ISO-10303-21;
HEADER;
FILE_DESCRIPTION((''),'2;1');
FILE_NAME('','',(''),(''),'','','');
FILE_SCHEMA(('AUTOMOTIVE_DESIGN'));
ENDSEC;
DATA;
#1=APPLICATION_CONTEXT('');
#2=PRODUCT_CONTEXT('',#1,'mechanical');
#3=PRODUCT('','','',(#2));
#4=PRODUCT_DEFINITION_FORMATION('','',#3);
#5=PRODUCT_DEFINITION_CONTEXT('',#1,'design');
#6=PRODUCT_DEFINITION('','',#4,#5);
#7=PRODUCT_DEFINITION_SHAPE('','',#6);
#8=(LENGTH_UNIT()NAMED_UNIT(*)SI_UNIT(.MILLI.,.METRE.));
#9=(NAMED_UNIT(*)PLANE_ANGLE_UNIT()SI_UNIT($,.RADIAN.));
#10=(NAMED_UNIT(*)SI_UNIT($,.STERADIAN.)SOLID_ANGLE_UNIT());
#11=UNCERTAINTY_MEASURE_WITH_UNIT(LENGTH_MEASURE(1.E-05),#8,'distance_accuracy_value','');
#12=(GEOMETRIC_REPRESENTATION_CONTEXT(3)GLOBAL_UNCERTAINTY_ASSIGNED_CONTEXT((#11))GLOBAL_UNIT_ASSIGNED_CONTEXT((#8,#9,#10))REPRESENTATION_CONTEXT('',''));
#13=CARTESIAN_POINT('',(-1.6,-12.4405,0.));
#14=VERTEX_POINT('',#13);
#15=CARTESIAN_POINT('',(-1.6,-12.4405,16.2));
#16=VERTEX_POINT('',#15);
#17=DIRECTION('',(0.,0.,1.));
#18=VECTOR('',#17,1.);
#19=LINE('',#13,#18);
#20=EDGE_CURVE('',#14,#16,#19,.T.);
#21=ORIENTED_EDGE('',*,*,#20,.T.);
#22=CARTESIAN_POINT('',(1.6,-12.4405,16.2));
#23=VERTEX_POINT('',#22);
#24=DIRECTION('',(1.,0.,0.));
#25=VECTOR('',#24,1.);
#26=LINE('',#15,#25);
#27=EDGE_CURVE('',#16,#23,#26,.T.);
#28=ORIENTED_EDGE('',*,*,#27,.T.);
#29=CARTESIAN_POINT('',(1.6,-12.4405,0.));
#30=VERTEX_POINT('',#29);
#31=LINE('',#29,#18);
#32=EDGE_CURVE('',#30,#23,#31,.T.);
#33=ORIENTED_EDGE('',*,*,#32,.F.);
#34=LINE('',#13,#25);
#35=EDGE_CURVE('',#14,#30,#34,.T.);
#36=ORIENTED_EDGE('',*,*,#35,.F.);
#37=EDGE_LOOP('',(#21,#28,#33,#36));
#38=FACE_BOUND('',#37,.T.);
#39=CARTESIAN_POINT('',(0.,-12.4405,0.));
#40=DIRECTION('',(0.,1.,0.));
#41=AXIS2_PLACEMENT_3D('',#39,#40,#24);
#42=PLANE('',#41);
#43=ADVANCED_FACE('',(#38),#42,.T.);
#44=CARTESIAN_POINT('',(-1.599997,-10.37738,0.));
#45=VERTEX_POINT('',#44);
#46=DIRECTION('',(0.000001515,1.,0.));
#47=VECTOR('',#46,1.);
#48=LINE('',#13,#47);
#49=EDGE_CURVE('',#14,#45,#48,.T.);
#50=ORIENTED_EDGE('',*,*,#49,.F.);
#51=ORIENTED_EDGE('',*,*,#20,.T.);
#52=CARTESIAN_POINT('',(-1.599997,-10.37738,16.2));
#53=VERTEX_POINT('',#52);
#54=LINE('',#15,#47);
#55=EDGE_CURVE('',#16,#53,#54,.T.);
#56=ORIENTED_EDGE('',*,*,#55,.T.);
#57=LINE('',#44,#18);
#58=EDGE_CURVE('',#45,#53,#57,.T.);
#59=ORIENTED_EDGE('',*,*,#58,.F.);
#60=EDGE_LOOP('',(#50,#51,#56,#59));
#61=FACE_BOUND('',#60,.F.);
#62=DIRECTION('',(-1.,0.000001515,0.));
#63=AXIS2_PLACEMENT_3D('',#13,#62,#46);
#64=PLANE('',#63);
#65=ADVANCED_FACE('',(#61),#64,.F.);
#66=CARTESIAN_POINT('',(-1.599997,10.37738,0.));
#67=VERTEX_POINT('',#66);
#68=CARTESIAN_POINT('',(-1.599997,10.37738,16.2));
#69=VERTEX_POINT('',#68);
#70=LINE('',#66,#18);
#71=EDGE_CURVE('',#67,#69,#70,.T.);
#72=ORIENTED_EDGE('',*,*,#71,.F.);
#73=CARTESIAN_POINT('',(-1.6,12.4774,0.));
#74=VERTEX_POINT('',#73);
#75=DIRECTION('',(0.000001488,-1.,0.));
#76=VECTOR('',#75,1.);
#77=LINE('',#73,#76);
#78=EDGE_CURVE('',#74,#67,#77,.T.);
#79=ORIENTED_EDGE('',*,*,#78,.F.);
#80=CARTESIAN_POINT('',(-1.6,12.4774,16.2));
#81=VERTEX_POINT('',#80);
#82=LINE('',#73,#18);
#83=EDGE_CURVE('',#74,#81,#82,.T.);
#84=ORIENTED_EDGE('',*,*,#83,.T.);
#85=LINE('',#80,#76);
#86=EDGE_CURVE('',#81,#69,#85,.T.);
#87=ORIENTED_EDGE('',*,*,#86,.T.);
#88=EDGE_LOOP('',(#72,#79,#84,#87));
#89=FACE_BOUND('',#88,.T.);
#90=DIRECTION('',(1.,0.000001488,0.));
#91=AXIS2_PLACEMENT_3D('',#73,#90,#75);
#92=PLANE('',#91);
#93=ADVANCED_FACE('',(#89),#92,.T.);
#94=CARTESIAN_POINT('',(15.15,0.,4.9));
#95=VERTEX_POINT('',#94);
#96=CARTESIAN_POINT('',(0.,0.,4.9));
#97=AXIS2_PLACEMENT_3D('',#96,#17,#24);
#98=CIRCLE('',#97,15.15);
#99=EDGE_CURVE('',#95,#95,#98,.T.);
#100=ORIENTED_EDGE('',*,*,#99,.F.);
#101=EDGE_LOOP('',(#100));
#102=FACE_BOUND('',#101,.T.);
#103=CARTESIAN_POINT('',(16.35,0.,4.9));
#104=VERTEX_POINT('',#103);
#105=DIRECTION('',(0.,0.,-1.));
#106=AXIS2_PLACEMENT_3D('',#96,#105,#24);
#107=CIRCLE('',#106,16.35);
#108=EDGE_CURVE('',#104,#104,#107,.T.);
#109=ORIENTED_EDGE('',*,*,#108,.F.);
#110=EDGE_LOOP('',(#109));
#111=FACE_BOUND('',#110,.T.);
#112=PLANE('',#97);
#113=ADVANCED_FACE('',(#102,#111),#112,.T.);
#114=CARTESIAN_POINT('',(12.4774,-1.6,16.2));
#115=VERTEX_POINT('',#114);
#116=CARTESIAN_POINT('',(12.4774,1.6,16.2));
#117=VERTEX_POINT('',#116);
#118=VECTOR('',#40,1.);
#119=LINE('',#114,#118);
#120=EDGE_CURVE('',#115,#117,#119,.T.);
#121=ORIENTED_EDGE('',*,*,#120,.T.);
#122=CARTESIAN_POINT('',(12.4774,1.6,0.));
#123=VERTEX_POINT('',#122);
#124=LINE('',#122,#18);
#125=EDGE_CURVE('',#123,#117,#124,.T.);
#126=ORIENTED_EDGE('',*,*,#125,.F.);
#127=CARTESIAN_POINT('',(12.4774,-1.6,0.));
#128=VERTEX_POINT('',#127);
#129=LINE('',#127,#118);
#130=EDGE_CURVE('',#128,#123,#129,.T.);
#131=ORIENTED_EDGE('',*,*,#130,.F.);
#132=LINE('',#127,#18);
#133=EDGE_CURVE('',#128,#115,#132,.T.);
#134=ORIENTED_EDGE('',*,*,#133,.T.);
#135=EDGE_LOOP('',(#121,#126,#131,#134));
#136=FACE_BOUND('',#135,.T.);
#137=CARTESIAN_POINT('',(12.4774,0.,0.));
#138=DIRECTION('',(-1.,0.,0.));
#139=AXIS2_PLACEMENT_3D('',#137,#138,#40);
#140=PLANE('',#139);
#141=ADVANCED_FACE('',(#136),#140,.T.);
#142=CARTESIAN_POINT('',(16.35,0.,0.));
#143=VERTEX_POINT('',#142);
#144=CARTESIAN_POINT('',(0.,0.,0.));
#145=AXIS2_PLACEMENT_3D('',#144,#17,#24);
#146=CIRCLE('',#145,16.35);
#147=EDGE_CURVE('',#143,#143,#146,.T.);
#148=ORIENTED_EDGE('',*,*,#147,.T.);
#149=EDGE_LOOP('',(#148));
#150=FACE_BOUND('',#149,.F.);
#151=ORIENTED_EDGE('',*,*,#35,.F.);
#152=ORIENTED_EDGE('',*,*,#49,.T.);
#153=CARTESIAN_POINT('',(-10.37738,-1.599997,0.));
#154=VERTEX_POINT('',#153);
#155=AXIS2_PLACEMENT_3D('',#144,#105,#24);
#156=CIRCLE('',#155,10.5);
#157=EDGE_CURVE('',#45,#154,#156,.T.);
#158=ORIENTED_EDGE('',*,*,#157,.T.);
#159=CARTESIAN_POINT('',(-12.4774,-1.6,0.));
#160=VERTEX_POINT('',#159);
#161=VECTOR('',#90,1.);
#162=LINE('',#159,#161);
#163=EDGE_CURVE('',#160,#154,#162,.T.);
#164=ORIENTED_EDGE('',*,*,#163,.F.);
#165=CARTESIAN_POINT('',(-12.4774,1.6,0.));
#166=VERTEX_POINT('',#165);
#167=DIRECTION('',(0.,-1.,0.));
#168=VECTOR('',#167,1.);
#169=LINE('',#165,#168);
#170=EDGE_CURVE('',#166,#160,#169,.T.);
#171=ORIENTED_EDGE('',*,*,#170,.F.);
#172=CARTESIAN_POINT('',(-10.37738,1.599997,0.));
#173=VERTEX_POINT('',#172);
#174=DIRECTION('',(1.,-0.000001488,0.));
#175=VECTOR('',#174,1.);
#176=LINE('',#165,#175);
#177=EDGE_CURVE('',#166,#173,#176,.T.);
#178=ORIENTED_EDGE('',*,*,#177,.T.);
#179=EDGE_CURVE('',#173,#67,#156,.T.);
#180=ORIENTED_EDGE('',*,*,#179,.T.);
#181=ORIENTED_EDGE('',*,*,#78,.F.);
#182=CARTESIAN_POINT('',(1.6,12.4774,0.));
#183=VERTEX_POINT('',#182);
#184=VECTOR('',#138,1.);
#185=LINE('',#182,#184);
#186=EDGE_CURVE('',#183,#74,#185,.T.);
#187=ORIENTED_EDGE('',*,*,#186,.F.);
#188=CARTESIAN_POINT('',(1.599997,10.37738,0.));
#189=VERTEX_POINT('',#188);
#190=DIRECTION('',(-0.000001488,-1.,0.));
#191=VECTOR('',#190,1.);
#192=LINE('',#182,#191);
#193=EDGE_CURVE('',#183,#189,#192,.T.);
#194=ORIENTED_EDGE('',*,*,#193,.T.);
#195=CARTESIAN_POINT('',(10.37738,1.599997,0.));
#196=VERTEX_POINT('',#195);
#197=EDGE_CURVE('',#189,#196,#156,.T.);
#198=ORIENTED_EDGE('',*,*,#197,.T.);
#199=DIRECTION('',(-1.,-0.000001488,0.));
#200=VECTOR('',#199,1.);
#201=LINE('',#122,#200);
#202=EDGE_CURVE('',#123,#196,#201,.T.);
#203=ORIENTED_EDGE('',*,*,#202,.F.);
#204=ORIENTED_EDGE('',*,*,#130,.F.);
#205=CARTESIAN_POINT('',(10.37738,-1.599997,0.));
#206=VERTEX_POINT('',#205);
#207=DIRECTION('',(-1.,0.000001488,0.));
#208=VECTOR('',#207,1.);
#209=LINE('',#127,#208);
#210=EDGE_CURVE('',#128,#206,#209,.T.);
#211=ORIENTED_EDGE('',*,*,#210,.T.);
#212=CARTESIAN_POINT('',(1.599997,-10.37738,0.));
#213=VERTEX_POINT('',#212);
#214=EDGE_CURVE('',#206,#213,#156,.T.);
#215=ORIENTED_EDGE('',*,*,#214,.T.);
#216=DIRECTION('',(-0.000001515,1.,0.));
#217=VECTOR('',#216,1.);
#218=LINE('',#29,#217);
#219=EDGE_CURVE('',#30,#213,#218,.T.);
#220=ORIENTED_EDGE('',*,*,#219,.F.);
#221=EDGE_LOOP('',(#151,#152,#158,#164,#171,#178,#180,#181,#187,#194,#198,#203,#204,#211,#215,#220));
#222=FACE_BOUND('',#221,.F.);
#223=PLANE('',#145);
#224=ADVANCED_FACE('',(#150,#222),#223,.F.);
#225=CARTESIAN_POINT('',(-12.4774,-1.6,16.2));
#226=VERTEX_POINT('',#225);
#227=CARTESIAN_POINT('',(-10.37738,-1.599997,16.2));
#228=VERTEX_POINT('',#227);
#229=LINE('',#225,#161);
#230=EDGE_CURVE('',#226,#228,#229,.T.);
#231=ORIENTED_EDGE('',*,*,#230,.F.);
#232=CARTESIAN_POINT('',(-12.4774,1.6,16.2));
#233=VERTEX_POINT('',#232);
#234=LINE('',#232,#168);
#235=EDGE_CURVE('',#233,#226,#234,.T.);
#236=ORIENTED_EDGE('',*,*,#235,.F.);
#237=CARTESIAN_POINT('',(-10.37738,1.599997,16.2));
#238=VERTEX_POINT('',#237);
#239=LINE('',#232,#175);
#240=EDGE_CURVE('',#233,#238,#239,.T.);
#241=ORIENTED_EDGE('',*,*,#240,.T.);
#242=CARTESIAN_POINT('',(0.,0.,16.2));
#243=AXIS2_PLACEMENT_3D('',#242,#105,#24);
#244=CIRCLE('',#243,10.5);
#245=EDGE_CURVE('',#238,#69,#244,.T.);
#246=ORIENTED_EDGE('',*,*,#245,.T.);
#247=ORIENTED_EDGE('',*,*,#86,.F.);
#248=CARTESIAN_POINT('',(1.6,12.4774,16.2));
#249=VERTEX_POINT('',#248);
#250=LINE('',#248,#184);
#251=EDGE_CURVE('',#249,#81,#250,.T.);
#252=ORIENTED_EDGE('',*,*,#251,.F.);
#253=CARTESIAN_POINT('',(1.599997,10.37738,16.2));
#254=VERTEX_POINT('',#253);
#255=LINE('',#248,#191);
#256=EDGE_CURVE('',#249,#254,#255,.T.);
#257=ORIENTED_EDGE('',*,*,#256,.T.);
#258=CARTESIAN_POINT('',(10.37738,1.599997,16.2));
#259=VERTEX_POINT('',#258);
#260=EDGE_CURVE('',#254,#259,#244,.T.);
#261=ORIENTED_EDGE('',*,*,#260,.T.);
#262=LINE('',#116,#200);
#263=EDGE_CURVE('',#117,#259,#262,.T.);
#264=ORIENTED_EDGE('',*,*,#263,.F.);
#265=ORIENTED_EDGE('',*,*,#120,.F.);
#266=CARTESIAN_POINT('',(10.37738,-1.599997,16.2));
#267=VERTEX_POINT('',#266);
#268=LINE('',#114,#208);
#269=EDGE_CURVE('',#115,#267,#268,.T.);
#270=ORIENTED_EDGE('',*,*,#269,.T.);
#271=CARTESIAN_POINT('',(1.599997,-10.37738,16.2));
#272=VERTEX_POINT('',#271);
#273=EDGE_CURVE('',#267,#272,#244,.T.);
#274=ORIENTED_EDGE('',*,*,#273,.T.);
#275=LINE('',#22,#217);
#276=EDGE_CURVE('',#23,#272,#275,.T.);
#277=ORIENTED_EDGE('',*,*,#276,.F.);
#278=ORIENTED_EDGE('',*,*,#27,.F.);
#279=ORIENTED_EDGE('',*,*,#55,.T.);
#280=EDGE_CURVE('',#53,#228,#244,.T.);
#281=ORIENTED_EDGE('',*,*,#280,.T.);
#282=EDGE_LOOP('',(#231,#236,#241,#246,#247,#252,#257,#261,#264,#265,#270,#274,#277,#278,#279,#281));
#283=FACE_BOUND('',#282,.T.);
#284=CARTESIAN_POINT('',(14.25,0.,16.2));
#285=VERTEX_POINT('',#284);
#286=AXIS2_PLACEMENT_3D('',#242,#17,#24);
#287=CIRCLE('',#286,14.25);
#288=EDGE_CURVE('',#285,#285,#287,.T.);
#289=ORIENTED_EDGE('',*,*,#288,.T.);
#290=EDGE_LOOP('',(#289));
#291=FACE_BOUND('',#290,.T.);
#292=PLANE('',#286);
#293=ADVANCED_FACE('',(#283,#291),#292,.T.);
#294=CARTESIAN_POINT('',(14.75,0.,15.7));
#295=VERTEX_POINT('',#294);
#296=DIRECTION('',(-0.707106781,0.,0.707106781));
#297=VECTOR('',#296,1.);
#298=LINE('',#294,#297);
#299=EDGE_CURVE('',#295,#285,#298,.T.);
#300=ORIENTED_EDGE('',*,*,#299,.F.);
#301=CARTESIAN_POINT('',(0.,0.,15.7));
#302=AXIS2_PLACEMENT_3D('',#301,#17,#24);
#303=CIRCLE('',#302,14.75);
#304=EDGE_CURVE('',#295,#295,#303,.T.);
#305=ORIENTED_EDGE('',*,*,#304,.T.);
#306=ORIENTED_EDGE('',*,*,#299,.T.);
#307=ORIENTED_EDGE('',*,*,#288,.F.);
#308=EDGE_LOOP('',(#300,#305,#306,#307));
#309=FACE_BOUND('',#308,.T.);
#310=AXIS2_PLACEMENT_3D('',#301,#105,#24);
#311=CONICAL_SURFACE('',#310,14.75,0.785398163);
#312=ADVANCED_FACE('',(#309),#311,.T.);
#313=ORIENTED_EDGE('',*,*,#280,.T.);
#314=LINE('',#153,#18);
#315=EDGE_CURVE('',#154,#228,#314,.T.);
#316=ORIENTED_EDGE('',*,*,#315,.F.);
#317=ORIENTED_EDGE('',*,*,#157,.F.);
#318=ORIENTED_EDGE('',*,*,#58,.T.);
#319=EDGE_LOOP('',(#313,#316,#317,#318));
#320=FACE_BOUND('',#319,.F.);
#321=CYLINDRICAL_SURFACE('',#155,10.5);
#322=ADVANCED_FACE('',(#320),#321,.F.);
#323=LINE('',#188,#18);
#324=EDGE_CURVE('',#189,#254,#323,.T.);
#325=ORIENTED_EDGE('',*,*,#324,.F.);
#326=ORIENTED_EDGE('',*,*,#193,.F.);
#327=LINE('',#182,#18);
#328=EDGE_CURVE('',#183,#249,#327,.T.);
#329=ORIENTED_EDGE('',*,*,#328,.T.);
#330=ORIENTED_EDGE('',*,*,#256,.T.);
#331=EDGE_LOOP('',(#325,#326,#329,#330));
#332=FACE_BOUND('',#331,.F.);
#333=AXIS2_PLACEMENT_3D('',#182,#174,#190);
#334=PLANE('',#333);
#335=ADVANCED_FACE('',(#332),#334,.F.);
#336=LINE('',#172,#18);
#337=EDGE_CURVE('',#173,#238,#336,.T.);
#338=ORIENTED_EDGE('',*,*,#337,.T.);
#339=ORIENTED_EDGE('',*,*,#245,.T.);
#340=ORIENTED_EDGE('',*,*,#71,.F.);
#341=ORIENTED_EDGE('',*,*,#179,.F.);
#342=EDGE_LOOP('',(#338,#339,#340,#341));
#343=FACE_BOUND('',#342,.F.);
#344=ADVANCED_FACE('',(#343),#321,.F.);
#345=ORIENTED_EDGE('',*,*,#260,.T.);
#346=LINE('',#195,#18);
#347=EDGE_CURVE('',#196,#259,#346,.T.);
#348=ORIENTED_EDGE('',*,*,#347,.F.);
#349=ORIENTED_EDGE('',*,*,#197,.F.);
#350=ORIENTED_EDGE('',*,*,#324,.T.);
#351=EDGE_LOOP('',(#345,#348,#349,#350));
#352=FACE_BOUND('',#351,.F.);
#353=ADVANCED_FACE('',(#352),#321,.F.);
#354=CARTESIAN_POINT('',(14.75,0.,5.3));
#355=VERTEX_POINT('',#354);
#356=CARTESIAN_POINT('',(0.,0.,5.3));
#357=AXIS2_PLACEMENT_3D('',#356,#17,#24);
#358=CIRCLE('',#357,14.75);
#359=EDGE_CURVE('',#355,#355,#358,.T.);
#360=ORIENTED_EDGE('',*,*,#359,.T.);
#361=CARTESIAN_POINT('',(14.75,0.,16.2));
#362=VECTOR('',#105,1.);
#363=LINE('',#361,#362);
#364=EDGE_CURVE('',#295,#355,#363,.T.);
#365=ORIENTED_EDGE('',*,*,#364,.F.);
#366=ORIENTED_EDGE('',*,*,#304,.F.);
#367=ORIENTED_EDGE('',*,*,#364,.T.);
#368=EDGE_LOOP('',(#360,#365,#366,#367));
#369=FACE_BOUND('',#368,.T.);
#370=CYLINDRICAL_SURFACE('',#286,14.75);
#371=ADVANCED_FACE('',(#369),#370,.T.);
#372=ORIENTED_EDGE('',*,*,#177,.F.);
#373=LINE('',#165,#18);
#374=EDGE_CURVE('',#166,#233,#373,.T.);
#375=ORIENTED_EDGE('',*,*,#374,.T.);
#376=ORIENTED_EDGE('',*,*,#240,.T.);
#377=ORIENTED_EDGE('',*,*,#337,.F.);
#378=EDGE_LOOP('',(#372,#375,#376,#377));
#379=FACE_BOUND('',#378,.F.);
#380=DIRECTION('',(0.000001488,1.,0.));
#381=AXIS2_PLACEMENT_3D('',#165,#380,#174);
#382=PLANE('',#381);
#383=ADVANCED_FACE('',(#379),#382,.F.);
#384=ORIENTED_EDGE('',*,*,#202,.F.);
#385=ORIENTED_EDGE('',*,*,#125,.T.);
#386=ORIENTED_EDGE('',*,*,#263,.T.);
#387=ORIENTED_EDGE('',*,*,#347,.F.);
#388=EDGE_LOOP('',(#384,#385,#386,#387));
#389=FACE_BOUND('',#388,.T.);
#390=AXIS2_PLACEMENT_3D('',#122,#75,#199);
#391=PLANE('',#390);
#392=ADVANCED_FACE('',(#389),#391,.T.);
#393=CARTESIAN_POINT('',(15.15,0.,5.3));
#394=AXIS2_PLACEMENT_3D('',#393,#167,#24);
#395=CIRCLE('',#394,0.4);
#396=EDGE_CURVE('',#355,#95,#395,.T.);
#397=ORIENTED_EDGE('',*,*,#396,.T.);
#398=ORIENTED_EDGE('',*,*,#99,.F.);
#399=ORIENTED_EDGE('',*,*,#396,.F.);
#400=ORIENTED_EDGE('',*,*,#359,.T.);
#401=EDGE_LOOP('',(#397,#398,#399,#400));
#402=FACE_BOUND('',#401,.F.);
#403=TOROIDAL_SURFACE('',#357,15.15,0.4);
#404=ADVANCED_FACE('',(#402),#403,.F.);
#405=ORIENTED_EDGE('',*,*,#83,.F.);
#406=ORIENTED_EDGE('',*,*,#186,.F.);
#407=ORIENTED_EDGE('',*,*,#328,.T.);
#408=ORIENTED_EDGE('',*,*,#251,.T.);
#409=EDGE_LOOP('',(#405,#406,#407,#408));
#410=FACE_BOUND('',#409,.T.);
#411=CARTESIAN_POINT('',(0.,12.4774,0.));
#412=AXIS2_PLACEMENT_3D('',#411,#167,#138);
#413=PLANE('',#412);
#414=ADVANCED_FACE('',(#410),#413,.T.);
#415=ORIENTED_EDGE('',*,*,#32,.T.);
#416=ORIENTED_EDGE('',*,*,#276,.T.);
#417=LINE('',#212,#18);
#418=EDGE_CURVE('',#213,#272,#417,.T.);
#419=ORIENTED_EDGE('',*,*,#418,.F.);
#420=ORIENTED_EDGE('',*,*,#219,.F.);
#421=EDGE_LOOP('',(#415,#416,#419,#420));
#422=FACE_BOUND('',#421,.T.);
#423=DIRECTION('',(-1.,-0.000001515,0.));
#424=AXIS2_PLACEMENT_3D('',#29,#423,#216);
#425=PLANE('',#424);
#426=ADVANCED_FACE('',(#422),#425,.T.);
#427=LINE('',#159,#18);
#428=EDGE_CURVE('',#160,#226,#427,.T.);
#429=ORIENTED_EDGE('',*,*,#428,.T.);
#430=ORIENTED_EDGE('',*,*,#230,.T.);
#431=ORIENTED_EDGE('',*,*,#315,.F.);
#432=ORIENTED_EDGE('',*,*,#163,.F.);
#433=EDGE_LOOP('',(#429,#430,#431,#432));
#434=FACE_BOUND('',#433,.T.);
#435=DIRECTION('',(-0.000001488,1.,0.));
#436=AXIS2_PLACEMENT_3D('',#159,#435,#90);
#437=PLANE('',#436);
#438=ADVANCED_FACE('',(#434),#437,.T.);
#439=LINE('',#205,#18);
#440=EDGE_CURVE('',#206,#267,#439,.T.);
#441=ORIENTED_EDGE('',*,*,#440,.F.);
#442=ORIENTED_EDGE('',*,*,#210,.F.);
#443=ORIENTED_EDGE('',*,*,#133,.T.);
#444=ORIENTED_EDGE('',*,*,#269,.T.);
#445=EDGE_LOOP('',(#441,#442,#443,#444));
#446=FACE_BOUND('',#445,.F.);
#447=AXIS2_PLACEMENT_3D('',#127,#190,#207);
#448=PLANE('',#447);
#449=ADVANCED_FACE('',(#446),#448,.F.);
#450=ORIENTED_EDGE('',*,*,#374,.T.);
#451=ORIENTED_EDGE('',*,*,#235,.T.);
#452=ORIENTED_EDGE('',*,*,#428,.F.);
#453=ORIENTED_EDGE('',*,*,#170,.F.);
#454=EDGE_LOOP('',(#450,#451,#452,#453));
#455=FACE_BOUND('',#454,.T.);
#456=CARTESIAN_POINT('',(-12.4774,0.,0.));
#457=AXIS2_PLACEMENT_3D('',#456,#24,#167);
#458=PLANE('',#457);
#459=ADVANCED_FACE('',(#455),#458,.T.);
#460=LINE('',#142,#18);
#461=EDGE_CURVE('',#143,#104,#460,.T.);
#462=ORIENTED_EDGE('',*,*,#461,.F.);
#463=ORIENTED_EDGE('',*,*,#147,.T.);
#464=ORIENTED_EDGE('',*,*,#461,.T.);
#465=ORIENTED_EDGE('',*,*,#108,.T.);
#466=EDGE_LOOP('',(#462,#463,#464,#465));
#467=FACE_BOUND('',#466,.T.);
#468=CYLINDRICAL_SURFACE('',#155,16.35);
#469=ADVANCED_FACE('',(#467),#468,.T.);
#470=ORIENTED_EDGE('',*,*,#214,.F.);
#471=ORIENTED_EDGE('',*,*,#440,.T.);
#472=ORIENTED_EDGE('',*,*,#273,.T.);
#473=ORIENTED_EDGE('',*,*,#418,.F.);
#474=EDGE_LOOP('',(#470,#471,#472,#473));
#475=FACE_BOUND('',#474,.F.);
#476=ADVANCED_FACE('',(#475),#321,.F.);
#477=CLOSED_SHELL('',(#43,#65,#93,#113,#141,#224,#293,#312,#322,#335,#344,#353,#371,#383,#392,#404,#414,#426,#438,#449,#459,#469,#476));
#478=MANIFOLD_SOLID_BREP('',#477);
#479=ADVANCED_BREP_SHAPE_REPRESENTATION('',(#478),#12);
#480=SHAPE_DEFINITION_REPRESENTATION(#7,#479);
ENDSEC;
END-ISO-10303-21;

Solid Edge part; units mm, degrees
sketch "Sketch1" plane through (0, 0, 0) normal (0, 0, 1) x (1, 0, 0)
  circle A0 centre (0, 0) radius 16.35
  line L0 (-12.4774, -1.6) -> (-10.3774, -1.6)
  line L1 (-12.4774, 0) -> (-12.4774, -1.6)
  line L2 (-12.4774, 0) -> (-12.4774, 1.6)
  line L3 (-12.4774, 1.6) -> (-10.3774, 1.6)
  arc A1 (-10.3774, 1.6) -> (-1.6, 10.3774) centre (0, 0) cw
  line L4 (-1.6, 12.4774) -> (-1.6, 10.3774)
  line L5 (0, 12.4774) -> (-1.6, 12.4774)
  line L6 (0, 12.4774) -> (1.6, 12.4774)
  line L7 (1.6, 12.4774) -> (1.6, 10.3774)
  arc A2 (1.6, 10.3774) -> (10.3774, 1.6) centre (0, 0) cw
  line L8 (12.4774, 1.6) -> (10.3774, 1.6)
  line L9 (12.4774, 0) -> (12.4774, 1.6)
  line L10 (12.4774, 0) -> (12.4774, -1.6)
  line L11 (12.4774, -1.6) -> (10.3774, -1.6)
  arc A3 (10.3774, -1.6) -> (1.6, -10.3774) centre (0, 0) cw
  line L12 (1.6, -12.4405) -> (1.6, -10.3774)
  line L13 (0, -12.4405) -> (1.6, -12.4405)
  line L14 (0, -12.4405) -> (-1.6, -12.4405)
  line L15 (-1.6, -12.4405) -> (-1.6, -10.3774)
  arc A4 (-1.6, -10.3774) -> (-10.3774, -1.6) centre (0, 0) cw
extrude "Protrusion1" add sketch "Sketch1" along normal blind 16.2
sketch "Sketch2" plane through (0, 0, 16.2) normal (0, 0, 1) x (1, 0, 0)
  circle A0 centre (0, 0) radius 14.75
  circle A1 centre (0, 0) radius 17.5589
extrude "ScavoEstrusione_1" cut sketch "Sketch2" against normal blind 11.3
chamfer "Smusso_1" distance 0.5 angle 45 1 edges at (-14.75, 0, 16.2)
fillet "Rotondo_1" radius 0.4 1 edges at (-14.75, 0, 4.9)
